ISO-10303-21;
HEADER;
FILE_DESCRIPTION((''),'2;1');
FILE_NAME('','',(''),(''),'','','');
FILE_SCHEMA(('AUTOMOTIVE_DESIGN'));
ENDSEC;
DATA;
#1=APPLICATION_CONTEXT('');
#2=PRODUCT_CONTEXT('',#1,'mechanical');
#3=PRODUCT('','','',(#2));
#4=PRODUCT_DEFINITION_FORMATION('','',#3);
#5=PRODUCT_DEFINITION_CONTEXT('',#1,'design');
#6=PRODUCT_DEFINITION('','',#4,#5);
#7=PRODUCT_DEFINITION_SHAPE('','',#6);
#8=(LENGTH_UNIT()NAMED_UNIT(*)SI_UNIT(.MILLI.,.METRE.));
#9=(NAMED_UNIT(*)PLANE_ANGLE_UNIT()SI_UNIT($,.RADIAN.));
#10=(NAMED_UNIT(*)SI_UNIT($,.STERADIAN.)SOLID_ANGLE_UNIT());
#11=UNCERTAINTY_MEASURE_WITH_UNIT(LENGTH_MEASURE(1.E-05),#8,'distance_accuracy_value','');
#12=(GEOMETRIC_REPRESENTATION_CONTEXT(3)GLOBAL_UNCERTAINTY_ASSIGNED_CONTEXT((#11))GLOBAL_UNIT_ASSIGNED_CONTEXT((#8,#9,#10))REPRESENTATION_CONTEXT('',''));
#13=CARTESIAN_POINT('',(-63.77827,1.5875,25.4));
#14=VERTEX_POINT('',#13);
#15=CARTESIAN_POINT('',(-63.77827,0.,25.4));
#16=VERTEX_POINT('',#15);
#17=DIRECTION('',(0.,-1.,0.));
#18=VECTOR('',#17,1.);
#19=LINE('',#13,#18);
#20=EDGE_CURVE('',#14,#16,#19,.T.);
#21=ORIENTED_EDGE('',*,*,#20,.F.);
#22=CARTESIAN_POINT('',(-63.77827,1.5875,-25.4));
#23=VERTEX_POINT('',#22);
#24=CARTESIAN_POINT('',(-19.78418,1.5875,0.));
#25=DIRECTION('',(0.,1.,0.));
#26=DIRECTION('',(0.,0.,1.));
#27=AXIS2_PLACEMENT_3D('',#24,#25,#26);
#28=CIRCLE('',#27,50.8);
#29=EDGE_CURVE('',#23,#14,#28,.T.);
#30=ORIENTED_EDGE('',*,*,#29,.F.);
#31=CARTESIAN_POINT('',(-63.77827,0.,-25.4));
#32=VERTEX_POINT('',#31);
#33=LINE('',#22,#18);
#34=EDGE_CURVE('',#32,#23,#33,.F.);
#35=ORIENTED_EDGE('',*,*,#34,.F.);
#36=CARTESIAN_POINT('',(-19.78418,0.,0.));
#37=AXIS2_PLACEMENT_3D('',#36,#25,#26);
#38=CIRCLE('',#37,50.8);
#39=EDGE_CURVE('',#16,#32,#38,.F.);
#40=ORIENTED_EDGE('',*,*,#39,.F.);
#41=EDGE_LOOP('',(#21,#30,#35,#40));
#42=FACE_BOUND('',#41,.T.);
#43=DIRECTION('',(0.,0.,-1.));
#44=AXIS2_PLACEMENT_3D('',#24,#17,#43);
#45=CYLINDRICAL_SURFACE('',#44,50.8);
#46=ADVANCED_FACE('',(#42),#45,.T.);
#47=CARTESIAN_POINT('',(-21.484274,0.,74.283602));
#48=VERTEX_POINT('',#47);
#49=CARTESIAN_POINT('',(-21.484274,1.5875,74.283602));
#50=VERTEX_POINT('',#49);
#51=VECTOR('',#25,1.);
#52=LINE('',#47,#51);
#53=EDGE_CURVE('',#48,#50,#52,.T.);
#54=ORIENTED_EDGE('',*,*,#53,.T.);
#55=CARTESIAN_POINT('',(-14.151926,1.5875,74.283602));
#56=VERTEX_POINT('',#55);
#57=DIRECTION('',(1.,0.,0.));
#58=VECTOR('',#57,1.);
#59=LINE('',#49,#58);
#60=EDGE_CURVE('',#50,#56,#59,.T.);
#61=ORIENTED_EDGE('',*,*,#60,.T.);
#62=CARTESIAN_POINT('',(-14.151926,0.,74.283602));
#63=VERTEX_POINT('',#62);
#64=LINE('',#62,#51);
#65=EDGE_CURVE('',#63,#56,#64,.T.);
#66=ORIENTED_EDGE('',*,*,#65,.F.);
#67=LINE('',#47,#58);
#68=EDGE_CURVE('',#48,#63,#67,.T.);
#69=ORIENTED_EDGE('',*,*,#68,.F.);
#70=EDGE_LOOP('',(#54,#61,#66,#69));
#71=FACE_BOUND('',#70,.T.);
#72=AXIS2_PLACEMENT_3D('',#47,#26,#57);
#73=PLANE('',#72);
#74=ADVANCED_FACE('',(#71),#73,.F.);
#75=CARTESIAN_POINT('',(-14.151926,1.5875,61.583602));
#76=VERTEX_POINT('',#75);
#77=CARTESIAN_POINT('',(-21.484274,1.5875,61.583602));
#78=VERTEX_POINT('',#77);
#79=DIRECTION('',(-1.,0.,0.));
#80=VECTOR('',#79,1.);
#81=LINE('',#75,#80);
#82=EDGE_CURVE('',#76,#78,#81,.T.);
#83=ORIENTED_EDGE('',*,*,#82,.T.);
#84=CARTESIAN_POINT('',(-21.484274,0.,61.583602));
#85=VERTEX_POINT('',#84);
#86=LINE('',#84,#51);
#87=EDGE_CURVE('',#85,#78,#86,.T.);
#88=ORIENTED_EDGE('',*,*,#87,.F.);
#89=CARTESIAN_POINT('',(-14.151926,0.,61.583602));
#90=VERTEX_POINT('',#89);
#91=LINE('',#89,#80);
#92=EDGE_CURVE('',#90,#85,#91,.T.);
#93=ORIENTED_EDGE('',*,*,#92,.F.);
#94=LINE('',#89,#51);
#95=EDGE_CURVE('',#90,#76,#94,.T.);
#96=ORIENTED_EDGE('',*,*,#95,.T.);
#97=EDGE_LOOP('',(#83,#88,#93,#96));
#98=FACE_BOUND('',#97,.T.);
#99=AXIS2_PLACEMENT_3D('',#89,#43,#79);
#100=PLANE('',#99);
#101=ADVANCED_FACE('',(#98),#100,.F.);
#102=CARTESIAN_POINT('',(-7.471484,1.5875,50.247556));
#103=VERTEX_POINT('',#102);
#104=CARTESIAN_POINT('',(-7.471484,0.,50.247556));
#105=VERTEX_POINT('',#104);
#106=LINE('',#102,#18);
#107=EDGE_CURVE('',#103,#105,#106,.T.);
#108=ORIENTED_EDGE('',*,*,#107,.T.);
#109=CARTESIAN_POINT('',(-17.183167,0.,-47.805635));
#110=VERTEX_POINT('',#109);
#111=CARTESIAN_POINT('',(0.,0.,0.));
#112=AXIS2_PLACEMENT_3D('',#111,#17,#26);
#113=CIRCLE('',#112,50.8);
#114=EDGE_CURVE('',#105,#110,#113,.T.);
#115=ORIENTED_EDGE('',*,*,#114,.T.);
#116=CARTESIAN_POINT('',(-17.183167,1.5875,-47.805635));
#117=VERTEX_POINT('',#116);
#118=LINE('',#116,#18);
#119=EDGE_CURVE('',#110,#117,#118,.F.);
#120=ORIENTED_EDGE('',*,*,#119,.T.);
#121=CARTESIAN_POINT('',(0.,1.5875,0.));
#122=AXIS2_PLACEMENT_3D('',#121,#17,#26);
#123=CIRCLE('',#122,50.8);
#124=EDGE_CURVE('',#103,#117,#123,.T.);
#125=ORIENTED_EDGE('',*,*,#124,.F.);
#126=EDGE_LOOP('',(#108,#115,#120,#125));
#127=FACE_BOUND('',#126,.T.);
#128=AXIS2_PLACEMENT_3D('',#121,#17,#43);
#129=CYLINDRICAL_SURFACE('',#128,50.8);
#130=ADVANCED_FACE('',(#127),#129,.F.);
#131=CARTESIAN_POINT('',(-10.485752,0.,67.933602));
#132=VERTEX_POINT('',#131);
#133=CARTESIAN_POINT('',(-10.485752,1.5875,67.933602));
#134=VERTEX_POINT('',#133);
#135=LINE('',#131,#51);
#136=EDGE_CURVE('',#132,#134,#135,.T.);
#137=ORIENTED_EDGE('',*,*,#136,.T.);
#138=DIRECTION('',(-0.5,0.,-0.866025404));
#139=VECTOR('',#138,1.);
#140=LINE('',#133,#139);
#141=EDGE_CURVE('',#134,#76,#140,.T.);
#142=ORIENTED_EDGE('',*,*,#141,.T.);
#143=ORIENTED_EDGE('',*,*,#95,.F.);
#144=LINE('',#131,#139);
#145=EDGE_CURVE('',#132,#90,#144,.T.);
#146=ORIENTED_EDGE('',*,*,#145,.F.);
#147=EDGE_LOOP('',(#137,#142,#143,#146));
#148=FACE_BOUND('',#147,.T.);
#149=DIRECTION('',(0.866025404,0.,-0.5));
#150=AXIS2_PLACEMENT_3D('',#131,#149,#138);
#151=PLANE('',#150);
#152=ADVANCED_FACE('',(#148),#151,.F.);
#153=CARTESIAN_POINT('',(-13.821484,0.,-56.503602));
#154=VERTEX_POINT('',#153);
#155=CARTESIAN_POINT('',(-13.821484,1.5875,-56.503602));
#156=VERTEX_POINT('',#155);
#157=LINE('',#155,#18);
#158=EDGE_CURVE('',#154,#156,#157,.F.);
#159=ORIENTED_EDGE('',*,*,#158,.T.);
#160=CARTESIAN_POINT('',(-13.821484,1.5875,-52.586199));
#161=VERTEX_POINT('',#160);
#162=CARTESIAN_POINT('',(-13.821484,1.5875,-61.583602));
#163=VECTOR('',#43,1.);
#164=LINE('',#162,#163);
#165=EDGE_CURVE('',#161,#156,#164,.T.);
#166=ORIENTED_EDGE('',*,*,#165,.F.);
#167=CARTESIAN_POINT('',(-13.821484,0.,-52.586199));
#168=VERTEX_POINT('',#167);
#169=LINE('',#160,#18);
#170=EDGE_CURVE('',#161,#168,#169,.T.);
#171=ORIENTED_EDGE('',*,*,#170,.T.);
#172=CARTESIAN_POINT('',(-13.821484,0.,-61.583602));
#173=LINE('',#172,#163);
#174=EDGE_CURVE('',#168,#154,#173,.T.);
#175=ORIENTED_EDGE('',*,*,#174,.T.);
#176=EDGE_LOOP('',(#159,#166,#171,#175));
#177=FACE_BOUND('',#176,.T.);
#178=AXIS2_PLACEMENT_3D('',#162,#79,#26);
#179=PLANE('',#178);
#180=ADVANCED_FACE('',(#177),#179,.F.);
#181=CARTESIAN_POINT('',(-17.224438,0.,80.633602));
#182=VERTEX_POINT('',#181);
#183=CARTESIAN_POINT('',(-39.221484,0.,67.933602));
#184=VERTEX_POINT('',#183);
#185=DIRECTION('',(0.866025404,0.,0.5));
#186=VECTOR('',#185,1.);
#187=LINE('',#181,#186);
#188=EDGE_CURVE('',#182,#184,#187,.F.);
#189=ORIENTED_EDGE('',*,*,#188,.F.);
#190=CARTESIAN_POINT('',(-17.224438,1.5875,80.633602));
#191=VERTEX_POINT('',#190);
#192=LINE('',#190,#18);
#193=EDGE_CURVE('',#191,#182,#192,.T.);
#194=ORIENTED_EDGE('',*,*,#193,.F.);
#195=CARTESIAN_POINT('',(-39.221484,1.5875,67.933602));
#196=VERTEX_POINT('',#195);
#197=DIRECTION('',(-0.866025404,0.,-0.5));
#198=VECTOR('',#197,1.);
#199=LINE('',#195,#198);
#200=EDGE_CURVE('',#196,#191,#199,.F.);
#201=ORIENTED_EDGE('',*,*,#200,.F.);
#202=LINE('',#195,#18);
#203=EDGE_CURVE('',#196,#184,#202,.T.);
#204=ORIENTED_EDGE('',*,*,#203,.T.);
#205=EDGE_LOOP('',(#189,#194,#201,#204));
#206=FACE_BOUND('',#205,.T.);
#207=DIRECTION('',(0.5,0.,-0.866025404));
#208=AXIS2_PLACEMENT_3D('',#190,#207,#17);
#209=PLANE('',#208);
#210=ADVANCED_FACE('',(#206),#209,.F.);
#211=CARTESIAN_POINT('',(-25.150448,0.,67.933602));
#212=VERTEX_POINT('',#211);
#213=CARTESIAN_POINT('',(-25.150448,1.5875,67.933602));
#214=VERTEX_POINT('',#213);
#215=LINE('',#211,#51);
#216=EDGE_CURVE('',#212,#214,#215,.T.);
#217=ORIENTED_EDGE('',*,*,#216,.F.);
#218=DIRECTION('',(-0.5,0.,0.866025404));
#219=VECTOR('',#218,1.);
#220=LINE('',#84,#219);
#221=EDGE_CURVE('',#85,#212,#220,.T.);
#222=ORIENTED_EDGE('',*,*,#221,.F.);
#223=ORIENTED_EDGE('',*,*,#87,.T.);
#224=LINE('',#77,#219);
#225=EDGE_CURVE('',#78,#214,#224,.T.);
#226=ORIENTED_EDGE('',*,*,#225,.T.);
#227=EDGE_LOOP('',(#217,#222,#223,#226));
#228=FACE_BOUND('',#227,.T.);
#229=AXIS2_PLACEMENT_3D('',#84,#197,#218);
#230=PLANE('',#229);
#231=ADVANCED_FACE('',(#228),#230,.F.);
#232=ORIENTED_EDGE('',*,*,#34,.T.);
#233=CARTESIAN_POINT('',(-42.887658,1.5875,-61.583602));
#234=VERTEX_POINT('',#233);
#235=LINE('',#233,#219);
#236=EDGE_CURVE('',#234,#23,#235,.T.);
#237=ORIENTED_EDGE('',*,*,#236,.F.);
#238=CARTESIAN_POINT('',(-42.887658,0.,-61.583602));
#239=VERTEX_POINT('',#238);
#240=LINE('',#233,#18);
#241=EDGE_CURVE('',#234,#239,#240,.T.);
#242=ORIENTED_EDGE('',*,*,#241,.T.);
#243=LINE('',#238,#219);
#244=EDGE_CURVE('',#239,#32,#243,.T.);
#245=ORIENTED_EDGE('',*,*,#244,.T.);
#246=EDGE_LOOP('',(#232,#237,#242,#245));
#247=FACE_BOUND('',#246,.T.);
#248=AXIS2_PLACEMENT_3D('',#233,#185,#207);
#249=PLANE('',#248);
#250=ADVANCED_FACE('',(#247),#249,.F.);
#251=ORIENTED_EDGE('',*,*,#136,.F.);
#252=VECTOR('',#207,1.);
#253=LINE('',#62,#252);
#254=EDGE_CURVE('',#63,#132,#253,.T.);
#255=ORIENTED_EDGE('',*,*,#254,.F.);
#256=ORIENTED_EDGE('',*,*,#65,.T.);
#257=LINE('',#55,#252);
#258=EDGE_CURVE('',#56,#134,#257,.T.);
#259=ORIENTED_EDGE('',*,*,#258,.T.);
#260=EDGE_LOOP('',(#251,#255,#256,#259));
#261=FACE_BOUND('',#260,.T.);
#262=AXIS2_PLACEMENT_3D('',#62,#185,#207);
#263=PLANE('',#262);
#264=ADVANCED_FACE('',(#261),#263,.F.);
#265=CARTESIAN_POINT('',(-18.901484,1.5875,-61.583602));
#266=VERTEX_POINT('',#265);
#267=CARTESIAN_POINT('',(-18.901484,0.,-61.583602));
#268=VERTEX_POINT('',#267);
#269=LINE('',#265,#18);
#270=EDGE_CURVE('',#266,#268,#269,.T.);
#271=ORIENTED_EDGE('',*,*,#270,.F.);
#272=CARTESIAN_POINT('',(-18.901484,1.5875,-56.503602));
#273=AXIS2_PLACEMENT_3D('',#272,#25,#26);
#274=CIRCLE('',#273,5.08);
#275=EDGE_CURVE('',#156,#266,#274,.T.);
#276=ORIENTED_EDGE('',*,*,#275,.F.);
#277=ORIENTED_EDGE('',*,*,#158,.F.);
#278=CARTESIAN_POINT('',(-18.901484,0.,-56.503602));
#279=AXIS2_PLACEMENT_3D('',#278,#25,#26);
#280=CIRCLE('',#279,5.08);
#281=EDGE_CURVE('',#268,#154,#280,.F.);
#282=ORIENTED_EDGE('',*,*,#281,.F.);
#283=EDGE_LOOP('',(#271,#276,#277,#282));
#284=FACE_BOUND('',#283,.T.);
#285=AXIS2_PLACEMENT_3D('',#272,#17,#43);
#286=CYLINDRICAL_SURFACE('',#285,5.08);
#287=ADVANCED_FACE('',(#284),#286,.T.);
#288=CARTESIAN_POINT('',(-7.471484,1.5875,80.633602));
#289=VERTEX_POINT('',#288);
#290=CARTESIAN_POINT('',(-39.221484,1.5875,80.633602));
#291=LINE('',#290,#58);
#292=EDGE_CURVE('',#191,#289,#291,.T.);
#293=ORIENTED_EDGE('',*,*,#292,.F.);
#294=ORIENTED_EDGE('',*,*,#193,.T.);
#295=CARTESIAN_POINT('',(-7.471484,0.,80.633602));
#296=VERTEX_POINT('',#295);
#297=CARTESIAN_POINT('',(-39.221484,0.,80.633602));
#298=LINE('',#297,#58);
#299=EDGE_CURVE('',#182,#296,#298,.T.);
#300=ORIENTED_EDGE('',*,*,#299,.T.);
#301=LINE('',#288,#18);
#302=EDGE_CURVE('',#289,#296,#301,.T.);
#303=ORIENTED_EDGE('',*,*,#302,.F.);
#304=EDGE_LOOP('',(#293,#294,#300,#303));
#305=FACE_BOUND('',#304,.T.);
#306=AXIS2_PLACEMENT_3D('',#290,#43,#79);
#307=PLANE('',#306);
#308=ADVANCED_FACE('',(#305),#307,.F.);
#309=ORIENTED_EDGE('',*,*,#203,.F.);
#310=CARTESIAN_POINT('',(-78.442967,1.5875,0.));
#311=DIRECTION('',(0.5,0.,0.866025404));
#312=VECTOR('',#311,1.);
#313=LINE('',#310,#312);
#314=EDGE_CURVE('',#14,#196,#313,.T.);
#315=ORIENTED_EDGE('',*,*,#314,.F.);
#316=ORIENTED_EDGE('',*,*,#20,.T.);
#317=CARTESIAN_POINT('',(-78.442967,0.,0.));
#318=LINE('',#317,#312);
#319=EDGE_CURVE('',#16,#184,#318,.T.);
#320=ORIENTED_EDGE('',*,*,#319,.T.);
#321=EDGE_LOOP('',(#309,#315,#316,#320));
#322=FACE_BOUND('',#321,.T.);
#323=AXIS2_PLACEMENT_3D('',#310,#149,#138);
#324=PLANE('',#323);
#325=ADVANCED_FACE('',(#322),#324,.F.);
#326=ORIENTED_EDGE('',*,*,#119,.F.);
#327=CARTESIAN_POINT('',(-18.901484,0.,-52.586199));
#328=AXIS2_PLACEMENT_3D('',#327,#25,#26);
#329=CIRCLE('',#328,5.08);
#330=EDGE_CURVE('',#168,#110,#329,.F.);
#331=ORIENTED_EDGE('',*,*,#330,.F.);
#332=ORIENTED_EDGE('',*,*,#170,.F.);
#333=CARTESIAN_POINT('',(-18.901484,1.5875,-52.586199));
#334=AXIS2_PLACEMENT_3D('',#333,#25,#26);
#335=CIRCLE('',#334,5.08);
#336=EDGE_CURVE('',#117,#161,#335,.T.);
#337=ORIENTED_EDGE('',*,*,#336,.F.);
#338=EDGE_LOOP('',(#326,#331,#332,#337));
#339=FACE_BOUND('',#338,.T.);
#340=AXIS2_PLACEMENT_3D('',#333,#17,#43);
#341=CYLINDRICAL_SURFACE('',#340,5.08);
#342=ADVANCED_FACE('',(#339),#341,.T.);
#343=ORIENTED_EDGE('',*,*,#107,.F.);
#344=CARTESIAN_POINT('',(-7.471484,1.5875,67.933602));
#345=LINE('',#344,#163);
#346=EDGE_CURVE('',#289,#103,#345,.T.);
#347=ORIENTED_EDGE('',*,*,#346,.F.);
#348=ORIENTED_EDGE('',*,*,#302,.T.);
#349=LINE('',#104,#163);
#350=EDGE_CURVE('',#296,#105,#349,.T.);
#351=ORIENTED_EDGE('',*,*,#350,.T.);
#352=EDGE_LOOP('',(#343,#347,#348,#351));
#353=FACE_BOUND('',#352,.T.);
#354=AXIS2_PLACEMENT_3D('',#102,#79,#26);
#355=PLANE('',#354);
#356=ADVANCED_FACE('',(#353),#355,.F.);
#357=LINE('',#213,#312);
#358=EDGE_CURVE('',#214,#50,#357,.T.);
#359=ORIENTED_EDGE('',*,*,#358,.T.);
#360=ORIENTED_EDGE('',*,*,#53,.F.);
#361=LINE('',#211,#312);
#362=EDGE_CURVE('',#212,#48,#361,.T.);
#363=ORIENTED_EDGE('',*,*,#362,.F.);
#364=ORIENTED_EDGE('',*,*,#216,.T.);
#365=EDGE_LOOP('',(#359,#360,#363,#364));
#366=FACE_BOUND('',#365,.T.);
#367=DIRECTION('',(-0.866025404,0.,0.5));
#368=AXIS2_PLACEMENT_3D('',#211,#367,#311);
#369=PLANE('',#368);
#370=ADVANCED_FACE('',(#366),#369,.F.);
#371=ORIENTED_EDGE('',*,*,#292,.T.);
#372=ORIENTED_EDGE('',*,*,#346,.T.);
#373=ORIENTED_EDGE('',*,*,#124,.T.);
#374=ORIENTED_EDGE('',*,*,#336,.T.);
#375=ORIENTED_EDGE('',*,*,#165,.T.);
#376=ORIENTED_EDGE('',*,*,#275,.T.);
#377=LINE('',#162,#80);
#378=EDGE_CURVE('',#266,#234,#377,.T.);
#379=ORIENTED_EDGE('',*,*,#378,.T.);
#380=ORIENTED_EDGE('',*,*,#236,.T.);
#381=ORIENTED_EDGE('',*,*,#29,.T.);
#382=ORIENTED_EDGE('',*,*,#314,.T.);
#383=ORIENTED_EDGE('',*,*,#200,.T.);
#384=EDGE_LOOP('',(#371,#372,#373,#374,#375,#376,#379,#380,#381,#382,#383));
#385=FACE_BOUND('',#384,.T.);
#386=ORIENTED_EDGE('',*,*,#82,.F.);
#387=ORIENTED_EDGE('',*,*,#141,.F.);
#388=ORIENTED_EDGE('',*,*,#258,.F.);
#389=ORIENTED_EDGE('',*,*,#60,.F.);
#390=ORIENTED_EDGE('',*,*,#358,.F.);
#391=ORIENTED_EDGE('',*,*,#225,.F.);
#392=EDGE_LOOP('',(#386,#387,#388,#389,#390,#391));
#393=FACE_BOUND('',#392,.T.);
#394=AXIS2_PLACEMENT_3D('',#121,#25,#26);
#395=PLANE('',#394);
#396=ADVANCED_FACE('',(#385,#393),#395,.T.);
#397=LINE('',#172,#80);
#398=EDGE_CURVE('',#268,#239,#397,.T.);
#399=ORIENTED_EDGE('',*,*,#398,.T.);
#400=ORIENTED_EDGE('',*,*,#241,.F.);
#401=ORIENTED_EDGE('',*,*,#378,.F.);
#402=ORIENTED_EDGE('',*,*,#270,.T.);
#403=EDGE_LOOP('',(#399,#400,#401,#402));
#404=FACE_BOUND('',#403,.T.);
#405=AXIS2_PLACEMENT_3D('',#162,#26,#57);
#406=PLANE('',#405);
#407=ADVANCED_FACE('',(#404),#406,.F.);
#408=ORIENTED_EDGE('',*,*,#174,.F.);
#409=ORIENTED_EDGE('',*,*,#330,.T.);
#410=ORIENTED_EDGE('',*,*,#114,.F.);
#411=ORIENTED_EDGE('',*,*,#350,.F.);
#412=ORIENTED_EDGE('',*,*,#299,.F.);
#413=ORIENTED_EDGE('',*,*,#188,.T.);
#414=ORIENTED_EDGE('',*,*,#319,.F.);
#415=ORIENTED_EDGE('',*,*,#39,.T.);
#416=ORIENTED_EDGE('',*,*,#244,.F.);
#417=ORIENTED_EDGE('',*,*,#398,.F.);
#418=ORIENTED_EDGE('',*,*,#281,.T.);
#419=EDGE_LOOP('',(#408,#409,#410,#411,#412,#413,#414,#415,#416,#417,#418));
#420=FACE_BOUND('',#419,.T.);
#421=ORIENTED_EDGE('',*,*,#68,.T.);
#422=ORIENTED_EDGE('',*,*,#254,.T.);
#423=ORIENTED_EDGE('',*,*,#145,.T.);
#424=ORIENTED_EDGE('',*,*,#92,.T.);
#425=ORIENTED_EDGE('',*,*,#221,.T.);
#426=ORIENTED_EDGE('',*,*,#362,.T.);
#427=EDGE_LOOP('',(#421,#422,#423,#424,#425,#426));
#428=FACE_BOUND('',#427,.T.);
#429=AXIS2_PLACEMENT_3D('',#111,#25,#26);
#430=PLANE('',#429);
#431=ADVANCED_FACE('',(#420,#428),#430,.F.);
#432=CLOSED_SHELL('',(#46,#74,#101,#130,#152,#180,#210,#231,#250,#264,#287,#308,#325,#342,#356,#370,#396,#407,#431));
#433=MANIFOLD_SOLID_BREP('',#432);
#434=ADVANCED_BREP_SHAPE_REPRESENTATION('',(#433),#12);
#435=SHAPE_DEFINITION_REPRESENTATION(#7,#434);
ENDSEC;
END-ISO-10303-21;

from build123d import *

# Parameters (mm, degrees)
BOSS_EXTRUDE1_DEPTH = 1.5875
CUT_EXTRUDE1_DEPTH  = 1.5875
FILLET1_R           = 5.08
CHAMFER1_SIZE2      = 21.997045256
CHAMFER1_SIZE       = 12.7
FILLET2_R           = 50.8


with BuildPart() as part:
    # Sketch1 → Boss-Extrude1 (new body)
    with BuildSketch(Plane(origin=(0, 0, 0), x_dir=(1, 0, 0), z_dir=(0, 1, 0))):
        with BuildLine():
            Line((-78.442967332, 0), (-39.221483666, -67.933602458))
            Line((-39.221483666, -67.933602458), (-39.221483666, -80.633602458))
            Line((-39.221483666, -80.633602458), (-7.471483666, -80.633602458))
            Line((-7.471483666, -80.633602458), (-7.471483666, -67.933602458))
            Line((-7.471483666, -67.933602458), (-7.471483666, -50.247556476))
            ThreePointArc((-7.471483666, -50.247556476), (-50.696097309, -3.247417072), (-13.821483666, 48.883602458))
            Line((-13.821483666, 48.883602458), (-13.821483666, 61.583602458))
            Line((-13.821483666, 61.583602458), (-42.887657875, 61.583602458))
            Line((-42.887657875, 61.583602458), (-78.442967332, 0))
        make_face()
    extrude(amount=BOSS_EXTRUDE1_DEPTH)

    # Sketch2 → Cut-Extrude1 (cut)
    with BuildSketch(Plane(origin=(0, 1.5875, 0), x_dir=(1, 0, 0), z_dir=(0, 1, 0))):
        Polygon((-10.485751581, -67.933602458), (-14.151925791, -61.583602458), (-21.484274209, -61.583602458), (-25.150448419, -67.933602458), (-21.484274209, -74.283602458), (-14.151925791, -74.283602458), align=None)
    extrude(amount=-CUT_EXTRUDE1_DEPTH, mode=Mode.SUBTRACT)

    # Fillet1
    fillet1_edges = [part.edges().sort_by_distance(p)[0] for p in [
        (-13.821483666, 0.79375, -61.583602458),
        (-13.821483666, 0.79375, -48.883602458),
    ]]
    fillet(fillet1_edges, radius=FILLET1_R)

    # Chamfer1
    chamfer1_edges = [part.edges().sort_by_distance(p)[0] for p in [
        (-39.221483666, 0.79375, 80.633602458),
    ]]
    chamfer1_side = [part.faces().sort_by_distance(p)[0] for p in [
        (-39.221483666, 0.79375, 80.379602458),
    ]]
    chamfer(chamfer1_edges, length=CHAMFER1_SIZE - 0.0001, length2=CHAMFER1_SIZE2 - 0.0001, reference=chamfer1_side[0])  # a hair under: the kernel refuses the full size

    # Fillet2
    fillet2_edges = [part.edges().sort_by_distance(p)[0] for p in [
        (-78.442967332, 0.79375, 0),
    ]]
    fillet(fillet2_edges, radius=FILLET2_R)


solid = part.part
